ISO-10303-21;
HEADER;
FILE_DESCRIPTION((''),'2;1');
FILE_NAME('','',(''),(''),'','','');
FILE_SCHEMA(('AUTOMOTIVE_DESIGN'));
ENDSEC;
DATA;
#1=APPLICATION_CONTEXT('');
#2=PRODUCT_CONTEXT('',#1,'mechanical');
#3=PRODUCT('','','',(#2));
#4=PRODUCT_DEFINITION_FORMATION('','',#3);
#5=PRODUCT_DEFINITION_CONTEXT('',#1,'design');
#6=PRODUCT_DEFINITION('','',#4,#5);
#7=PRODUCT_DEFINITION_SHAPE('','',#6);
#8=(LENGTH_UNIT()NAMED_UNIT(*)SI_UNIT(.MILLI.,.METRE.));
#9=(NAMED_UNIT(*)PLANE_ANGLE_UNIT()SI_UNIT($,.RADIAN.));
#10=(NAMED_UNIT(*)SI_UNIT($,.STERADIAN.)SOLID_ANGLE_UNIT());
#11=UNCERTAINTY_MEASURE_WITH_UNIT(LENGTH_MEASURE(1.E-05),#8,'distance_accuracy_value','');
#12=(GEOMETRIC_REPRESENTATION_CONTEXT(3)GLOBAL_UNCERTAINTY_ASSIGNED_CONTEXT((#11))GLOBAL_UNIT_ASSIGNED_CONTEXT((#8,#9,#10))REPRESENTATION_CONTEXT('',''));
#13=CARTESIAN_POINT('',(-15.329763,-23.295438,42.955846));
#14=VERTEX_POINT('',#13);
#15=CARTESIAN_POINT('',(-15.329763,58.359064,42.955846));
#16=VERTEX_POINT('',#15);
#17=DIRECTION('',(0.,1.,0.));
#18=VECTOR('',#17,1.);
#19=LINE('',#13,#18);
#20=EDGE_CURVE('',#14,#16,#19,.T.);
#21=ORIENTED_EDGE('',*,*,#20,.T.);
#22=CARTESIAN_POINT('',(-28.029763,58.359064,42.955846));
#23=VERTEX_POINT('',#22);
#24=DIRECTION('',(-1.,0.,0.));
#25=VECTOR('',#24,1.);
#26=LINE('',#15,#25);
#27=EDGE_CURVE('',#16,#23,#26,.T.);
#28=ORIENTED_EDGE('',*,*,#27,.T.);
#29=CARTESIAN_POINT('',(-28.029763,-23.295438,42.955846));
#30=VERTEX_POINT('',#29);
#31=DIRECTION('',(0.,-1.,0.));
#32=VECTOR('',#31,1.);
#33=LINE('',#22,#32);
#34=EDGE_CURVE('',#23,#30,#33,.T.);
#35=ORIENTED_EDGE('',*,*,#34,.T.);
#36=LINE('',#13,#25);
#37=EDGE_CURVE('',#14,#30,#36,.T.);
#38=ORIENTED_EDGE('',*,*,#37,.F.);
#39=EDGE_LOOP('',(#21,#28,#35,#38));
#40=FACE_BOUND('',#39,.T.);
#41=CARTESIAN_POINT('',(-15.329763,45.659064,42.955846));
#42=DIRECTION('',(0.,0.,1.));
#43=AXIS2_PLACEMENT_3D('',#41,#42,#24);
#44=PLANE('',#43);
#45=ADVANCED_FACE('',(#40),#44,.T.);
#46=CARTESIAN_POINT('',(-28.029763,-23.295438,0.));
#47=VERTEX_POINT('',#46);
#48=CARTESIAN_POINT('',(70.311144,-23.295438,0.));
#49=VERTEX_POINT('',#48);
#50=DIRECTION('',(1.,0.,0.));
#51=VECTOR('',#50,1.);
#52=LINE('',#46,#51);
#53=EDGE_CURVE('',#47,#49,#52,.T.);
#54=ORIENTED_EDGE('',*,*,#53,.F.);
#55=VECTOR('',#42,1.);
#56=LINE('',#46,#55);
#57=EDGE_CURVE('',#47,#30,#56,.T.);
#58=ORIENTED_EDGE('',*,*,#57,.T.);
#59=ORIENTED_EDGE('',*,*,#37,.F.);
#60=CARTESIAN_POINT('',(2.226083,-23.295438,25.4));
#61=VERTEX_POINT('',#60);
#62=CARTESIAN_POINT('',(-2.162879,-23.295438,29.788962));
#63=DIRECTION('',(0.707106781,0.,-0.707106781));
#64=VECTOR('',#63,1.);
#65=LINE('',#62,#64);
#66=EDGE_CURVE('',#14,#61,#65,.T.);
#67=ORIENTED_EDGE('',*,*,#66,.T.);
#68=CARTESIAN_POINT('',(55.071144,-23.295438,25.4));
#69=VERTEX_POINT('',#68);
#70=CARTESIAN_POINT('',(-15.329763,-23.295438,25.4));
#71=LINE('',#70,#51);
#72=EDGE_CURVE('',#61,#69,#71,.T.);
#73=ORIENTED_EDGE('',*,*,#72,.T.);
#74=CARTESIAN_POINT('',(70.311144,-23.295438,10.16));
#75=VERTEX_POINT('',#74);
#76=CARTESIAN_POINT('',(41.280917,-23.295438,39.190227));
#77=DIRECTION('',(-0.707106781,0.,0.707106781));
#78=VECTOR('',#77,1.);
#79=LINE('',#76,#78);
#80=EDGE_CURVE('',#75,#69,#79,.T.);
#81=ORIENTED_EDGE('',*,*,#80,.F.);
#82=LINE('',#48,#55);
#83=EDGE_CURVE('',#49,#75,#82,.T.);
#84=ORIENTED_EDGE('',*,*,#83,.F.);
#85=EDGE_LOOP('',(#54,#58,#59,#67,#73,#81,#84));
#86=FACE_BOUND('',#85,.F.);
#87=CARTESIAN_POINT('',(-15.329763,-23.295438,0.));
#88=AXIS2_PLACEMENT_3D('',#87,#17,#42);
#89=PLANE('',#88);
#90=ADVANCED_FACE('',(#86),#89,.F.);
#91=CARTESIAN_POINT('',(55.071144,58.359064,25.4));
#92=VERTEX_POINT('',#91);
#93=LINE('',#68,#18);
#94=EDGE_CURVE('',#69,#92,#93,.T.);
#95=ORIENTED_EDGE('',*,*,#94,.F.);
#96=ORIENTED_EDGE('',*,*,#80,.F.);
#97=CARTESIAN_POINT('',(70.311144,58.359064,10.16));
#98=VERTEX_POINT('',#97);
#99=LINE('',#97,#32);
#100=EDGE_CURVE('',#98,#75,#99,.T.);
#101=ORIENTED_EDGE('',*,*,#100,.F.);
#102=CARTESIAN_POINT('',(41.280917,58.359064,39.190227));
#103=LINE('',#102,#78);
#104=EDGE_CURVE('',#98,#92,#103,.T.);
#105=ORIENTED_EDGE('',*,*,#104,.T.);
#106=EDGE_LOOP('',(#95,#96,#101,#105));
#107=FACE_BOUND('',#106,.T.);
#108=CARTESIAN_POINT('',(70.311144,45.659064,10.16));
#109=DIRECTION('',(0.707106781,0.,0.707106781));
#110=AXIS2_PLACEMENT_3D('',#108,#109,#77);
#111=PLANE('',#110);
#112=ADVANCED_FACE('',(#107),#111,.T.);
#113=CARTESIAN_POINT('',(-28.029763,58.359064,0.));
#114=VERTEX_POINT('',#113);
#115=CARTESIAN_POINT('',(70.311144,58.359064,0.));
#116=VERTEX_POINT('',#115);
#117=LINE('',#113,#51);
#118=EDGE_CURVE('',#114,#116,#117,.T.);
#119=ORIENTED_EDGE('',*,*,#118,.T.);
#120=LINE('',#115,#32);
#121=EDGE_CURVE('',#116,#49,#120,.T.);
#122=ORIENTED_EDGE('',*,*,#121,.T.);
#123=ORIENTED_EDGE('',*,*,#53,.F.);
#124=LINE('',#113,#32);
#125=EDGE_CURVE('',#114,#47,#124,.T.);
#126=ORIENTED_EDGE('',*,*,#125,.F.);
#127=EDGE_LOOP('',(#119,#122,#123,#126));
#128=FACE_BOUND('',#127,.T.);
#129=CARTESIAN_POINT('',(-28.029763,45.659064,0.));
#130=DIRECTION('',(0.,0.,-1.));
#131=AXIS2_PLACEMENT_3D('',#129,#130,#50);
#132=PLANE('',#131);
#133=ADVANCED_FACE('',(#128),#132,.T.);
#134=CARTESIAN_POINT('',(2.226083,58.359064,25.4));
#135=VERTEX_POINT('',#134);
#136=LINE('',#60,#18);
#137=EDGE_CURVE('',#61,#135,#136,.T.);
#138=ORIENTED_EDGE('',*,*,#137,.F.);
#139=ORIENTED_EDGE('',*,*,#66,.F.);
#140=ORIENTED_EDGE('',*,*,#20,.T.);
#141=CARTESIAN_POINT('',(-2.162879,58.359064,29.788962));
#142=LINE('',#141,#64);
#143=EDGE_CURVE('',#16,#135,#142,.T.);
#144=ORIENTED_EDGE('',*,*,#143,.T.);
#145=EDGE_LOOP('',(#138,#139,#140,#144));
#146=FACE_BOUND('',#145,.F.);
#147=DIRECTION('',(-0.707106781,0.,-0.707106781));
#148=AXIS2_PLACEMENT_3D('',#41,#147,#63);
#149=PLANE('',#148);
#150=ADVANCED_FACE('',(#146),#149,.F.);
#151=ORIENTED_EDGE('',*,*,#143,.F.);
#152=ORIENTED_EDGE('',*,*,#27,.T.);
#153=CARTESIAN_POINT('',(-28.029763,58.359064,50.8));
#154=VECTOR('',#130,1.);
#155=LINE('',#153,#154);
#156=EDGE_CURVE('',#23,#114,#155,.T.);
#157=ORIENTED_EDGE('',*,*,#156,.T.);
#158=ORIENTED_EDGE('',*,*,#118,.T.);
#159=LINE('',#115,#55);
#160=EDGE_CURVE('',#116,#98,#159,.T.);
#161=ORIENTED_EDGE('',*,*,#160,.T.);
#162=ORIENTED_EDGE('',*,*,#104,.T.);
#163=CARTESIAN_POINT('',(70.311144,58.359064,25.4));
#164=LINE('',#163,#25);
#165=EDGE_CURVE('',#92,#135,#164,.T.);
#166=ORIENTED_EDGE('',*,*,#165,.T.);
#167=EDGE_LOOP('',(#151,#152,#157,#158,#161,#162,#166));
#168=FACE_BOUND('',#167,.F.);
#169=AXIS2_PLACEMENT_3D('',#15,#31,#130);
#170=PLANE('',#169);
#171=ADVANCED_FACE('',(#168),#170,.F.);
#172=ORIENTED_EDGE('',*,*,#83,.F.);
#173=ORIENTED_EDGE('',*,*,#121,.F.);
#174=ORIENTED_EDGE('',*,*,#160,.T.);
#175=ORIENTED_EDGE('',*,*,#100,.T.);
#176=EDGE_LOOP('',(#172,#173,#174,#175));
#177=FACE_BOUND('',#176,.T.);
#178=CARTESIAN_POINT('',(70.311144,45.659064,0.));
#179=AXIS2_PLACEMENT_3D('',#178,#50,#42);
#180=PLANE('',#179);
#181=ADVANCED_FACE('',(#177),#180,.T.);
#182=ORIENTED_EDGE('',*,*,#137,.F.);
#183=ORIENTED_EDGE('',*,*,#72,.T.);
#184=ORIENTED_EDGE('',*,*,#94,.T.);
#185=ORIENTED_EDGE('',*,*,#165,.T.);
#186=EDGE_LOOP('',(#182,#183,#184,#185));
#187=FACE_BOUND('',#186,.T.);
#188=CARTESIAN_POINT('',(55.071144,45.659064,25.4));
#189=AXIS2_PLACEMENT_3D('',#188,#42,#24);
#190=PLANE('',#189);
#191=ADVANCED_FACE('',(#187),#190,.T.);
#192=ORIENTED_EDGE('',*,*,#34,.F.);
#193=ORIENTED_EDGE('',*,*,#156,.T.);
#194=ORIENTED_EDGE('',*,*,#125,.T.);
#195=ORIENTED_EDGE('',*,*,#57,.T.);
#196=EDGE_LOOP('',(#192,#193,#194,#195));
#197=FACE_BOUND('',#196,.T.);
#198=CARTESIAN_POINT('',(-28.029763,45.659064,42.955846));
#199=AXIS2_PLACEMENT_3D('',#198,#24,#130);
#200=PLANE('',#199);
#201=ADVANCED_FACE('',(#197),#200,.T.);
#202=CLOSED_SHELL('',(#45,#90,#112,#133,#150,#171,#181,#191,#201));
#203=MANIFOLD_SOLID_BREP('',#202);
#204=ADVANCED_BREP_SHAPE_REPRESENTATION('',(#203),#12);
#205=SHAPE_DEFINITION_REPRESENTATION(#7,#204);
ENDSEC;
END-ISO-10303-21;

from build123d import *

# Parameters (mm, degrees)
F0_W        = 15.3297632933
F0_H        = 43.554501608
F0_W_2      = 41.3750298321
F0_W_3      = 28.9361141622
F1_DEPTH    = 25.4
F2_W        = 17.5558461342
F2_H        = 43.554501608
F3_DEPTH    = 25.4
F4_SIZE     = 15.24
F5_T4_DEPTH = 174.1959973967
F6_DEPTH    = 12.7
F7_DEPTH    = 25.4
F8_DEPTH    = 12.7


# Not quite as in the source:
# - a fillet or chamfer that OpenCascade refuses, or shapes differently, is made with other operations: its cross-section is extruded or revolved along the edge and cut away or added


with BuildPart() as f1:
    # F0 (on Top) → F1 (new body)
    with BuildSketch(Plane.XY):
        with Locations((-7.6648816466, -1.5181871131)):
            Rectangle(F0_W, F0_H)
        with Locations((20.6875149161, -1.5181871131)):
            Rectangle(F0_W_2, F0_H)
        with Locations((55.8430869132, -1.5181871131)):
            Rectangle(F0_W_3, F0_H)
    extrude(amount=F1_DEPTH)

    # F2 (on face) → F3 (join)
    with BuildSketch(Plane.XY.offset(25.4)):
        with Locations((-6.5518402262, -1.5181871131)):
            Rectangle(F2_W, F2_H)
    extrude(amount=F3_DEPTH)

    # F4
    f4_edges = [f1.edges().sort_by_distance(p)[0] for p in [
        (70.311144, -1.518187, 25.4),
    ]]
    chamfer(f4_edges, length=F4_SIZE)

    # F5: chamfer of 25.4 on 1 edges, made by hand


with BuildPart() as f5_tool2:
    # F5_s3 → F5_t4 (new body)
    with BuildSketch(Plane.XZ.offset(88.6161858114)):
        Polygon((2.2260828409, 25.4), (-23.1739171591, 50.8), (2.2260828409, 50.8), align=None)
    extrude(amount=-F5_T4_DEPTH)

    split(bisect_by=Plane.XY.offset(25.4), keep=Keep.TOP)


with BuildPart() as f1_1:
    add(f1.part)

    # F5_t1: cut F5_tool2
    add(f5_tool2.part, mode=Mode.SUBTRACT)

    # F6 (add): a face of the model
    f6_faces = [f1_1.faces().sort_by_distance(p)[0] for p in [
        (-15.3297632933, -1.5181871131, 21.4779230671),
    ]]
    extrude(f6_faces, amount=F6_DEPTH)

    # F7 (add): a face of the model
    f7_faces = [f1_1.faces().sort_by_distance(p)[0] for p in [
        (14.1137713258, 20.2590636909, 15.1513351417),
    ]]
    extrude(f7_faces, amount=F7_DEPTH)

    # F8 (add): a face of the model
    f8_faces = [f1_1.faces().sort_by_distance(p)[0] for p in [
        (14.1137713258, 45.6590636909, 15.1513351417),
    ]]
    extrude(f8_faces, amount=F8_DEPTH)


solid = f1_1.part
